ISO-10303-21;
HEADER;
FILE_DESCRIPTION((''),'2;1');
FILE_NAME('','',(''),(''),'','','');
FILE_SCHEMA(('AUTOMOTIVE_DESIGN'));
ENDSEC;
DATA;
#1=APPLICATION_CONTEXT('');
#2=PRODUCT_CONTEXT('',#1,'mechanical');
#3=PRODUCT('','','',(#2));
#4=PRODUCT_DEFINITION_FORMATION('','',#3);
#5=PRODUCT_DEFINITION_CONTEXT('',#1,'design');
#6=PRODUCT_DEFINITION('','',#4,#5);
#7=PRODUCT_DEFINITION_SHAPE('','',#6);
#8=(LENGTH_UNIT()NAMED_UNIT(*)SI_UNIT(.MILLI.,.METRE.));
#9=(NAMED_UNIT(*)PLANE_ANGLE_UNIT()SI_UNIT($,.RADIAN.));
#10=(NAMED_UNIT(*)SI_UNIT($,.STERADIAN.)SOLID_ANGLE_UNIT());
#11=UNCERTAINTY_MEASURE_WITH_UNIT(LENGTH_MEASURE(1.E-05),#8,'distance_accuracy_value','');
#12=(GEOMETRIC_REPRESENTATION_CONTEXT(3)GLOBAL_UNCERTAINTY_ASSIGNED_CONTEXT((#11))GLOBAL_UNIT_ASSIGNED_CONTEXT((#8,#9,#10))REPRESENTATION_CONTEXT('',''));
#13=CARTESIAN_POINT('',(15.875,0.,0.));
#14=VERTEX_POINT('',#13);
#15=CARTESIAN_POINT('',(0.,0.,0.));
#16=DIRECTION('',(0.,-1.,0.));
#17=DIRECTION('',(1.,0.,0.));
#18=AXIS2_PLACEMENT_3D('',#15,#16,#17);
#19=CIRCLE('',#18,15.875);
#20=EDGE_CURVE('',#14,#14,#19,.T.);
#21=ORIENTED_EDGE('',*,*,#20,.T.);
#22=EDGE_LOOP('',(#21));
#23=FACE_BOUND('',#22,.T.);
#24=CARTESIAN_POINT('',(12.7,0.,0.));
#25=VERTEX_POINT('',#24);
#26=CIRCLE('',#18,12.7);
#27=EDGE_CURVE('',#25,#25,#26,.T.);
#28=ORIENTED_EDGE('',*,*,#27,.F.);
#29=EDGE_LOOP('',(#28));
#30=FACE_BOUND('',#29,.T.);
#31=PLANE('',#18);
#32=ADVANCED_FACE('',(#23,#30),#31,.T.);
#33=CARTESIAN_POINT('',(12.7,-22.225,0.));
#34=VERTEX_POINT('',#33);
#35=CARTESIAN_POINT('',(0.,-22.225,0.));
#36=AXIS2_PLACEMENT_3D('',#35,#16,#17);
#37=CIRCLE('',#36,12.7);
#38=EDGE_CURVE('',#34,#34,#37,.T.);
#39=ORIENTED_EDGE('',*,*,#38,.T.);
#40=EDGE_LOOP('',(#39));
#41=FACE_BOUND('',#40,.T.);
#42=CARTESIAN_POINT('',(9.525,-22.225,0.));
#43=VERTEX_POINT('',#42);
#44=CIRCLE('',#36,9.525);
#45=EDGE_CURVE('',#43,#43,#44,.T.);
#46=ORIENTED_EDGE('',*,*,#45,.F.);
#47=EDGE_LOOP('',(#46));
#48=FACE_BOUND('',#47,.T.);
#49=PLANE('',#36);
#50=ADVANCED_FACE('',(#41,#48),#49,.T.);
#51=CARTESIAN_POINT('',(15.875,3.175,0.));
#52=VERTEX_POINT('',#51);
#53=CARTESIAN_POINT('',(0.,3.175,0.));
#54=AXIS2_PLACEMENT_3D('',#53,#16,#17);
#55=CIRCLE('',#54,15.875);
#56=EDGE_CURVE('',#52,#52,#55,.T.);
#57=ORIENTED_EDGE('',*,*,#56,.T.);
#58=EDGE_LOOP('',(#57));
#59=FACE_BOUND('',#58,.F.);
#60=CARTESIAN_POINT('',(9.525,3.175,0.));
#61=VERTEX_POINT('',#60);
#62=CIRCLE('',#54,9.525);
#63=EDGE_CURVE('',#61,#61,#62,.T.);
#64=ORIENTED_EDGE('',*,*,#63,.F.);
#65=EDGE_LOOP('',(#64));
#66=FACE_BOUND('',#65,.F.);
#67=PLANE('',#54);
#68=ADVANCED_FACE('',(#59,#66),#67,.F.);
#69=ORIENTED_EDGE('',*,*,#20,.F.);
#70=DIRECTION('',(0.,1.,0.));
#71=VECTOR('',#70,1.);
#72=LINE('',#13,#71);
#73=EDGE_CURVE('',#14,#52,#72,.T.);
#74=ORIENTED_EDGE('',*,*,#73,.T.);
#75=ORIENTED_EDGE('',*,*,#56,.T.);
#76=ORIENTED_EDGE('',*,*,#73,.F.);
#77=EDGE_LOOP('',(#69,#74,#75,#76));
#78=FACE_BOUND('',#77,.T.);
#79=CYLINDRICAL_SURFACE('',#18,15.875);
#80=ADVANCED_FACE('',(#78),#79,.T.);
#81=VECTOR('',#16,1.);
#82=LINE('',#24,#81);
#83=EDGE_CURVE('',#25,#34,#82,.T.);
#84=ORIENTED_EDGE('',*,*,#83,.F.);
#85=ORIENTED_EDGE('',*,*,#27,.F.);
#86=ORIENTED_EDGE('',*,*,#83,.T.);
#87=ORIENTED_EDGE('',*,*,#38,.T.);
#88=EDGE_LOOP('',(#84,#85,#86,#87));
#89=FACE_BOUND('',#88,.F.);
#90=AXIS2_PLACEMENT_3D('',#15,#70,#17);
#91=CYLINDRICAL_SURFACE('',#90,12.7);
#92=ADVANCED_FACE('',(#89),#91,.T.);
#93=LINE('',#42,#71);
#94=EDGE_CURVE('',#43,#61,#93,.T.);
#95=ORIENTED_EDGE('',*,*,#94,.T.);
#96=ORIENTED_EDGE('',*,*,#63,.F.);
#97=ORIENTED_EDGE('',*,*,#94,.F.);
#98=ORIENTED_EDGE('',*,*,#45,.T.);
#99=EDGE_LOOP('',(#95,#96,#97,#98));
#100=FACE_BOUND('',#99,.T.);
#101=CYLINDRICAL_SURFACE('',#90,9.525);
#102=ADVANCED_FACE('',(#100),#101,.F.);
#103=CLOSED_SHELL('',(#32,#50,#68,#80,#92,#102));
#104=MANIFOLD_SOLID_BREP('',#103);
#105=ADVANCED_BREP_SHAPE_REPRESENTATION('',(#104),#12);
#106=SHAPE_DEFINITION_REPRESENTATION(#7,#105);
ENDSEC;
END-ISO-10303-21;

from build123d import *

# Parameters (mm, degrees)
F0_R     = 15.875
F0_R_2   = 12.7
F0_R_3   = 9.525
F1_DEPTH = 3.175
F3_DEPTH = 22.225


# Not quite as in the source:
# - a feature of the source that left no trace in its solid (it failed there, or was rolled back) is left out


with BuildPart() as f1:
    # F0 (on Front) → F1 (new body)
    with BuildSketch(Plane.XZ):
        Circle(F0_R)
        Circle(F0_R_2, mode=Mode.SUBTRACT)
        Circle(F0_R_2)
        Circle(F0_R_3, mode=Mode.SUBTRACT)
    extrude(amount=-F1_DEPTH)

    # F0 (on Front) → F3 (join)
    with BuildSketch(Plane.XZ):
        Circle(F0_R_2)
        Circle(F0_R_3, mode=Mode.SUBTRACT)
    extrude(amount=F3_DEPTH)


solid = f1.part
